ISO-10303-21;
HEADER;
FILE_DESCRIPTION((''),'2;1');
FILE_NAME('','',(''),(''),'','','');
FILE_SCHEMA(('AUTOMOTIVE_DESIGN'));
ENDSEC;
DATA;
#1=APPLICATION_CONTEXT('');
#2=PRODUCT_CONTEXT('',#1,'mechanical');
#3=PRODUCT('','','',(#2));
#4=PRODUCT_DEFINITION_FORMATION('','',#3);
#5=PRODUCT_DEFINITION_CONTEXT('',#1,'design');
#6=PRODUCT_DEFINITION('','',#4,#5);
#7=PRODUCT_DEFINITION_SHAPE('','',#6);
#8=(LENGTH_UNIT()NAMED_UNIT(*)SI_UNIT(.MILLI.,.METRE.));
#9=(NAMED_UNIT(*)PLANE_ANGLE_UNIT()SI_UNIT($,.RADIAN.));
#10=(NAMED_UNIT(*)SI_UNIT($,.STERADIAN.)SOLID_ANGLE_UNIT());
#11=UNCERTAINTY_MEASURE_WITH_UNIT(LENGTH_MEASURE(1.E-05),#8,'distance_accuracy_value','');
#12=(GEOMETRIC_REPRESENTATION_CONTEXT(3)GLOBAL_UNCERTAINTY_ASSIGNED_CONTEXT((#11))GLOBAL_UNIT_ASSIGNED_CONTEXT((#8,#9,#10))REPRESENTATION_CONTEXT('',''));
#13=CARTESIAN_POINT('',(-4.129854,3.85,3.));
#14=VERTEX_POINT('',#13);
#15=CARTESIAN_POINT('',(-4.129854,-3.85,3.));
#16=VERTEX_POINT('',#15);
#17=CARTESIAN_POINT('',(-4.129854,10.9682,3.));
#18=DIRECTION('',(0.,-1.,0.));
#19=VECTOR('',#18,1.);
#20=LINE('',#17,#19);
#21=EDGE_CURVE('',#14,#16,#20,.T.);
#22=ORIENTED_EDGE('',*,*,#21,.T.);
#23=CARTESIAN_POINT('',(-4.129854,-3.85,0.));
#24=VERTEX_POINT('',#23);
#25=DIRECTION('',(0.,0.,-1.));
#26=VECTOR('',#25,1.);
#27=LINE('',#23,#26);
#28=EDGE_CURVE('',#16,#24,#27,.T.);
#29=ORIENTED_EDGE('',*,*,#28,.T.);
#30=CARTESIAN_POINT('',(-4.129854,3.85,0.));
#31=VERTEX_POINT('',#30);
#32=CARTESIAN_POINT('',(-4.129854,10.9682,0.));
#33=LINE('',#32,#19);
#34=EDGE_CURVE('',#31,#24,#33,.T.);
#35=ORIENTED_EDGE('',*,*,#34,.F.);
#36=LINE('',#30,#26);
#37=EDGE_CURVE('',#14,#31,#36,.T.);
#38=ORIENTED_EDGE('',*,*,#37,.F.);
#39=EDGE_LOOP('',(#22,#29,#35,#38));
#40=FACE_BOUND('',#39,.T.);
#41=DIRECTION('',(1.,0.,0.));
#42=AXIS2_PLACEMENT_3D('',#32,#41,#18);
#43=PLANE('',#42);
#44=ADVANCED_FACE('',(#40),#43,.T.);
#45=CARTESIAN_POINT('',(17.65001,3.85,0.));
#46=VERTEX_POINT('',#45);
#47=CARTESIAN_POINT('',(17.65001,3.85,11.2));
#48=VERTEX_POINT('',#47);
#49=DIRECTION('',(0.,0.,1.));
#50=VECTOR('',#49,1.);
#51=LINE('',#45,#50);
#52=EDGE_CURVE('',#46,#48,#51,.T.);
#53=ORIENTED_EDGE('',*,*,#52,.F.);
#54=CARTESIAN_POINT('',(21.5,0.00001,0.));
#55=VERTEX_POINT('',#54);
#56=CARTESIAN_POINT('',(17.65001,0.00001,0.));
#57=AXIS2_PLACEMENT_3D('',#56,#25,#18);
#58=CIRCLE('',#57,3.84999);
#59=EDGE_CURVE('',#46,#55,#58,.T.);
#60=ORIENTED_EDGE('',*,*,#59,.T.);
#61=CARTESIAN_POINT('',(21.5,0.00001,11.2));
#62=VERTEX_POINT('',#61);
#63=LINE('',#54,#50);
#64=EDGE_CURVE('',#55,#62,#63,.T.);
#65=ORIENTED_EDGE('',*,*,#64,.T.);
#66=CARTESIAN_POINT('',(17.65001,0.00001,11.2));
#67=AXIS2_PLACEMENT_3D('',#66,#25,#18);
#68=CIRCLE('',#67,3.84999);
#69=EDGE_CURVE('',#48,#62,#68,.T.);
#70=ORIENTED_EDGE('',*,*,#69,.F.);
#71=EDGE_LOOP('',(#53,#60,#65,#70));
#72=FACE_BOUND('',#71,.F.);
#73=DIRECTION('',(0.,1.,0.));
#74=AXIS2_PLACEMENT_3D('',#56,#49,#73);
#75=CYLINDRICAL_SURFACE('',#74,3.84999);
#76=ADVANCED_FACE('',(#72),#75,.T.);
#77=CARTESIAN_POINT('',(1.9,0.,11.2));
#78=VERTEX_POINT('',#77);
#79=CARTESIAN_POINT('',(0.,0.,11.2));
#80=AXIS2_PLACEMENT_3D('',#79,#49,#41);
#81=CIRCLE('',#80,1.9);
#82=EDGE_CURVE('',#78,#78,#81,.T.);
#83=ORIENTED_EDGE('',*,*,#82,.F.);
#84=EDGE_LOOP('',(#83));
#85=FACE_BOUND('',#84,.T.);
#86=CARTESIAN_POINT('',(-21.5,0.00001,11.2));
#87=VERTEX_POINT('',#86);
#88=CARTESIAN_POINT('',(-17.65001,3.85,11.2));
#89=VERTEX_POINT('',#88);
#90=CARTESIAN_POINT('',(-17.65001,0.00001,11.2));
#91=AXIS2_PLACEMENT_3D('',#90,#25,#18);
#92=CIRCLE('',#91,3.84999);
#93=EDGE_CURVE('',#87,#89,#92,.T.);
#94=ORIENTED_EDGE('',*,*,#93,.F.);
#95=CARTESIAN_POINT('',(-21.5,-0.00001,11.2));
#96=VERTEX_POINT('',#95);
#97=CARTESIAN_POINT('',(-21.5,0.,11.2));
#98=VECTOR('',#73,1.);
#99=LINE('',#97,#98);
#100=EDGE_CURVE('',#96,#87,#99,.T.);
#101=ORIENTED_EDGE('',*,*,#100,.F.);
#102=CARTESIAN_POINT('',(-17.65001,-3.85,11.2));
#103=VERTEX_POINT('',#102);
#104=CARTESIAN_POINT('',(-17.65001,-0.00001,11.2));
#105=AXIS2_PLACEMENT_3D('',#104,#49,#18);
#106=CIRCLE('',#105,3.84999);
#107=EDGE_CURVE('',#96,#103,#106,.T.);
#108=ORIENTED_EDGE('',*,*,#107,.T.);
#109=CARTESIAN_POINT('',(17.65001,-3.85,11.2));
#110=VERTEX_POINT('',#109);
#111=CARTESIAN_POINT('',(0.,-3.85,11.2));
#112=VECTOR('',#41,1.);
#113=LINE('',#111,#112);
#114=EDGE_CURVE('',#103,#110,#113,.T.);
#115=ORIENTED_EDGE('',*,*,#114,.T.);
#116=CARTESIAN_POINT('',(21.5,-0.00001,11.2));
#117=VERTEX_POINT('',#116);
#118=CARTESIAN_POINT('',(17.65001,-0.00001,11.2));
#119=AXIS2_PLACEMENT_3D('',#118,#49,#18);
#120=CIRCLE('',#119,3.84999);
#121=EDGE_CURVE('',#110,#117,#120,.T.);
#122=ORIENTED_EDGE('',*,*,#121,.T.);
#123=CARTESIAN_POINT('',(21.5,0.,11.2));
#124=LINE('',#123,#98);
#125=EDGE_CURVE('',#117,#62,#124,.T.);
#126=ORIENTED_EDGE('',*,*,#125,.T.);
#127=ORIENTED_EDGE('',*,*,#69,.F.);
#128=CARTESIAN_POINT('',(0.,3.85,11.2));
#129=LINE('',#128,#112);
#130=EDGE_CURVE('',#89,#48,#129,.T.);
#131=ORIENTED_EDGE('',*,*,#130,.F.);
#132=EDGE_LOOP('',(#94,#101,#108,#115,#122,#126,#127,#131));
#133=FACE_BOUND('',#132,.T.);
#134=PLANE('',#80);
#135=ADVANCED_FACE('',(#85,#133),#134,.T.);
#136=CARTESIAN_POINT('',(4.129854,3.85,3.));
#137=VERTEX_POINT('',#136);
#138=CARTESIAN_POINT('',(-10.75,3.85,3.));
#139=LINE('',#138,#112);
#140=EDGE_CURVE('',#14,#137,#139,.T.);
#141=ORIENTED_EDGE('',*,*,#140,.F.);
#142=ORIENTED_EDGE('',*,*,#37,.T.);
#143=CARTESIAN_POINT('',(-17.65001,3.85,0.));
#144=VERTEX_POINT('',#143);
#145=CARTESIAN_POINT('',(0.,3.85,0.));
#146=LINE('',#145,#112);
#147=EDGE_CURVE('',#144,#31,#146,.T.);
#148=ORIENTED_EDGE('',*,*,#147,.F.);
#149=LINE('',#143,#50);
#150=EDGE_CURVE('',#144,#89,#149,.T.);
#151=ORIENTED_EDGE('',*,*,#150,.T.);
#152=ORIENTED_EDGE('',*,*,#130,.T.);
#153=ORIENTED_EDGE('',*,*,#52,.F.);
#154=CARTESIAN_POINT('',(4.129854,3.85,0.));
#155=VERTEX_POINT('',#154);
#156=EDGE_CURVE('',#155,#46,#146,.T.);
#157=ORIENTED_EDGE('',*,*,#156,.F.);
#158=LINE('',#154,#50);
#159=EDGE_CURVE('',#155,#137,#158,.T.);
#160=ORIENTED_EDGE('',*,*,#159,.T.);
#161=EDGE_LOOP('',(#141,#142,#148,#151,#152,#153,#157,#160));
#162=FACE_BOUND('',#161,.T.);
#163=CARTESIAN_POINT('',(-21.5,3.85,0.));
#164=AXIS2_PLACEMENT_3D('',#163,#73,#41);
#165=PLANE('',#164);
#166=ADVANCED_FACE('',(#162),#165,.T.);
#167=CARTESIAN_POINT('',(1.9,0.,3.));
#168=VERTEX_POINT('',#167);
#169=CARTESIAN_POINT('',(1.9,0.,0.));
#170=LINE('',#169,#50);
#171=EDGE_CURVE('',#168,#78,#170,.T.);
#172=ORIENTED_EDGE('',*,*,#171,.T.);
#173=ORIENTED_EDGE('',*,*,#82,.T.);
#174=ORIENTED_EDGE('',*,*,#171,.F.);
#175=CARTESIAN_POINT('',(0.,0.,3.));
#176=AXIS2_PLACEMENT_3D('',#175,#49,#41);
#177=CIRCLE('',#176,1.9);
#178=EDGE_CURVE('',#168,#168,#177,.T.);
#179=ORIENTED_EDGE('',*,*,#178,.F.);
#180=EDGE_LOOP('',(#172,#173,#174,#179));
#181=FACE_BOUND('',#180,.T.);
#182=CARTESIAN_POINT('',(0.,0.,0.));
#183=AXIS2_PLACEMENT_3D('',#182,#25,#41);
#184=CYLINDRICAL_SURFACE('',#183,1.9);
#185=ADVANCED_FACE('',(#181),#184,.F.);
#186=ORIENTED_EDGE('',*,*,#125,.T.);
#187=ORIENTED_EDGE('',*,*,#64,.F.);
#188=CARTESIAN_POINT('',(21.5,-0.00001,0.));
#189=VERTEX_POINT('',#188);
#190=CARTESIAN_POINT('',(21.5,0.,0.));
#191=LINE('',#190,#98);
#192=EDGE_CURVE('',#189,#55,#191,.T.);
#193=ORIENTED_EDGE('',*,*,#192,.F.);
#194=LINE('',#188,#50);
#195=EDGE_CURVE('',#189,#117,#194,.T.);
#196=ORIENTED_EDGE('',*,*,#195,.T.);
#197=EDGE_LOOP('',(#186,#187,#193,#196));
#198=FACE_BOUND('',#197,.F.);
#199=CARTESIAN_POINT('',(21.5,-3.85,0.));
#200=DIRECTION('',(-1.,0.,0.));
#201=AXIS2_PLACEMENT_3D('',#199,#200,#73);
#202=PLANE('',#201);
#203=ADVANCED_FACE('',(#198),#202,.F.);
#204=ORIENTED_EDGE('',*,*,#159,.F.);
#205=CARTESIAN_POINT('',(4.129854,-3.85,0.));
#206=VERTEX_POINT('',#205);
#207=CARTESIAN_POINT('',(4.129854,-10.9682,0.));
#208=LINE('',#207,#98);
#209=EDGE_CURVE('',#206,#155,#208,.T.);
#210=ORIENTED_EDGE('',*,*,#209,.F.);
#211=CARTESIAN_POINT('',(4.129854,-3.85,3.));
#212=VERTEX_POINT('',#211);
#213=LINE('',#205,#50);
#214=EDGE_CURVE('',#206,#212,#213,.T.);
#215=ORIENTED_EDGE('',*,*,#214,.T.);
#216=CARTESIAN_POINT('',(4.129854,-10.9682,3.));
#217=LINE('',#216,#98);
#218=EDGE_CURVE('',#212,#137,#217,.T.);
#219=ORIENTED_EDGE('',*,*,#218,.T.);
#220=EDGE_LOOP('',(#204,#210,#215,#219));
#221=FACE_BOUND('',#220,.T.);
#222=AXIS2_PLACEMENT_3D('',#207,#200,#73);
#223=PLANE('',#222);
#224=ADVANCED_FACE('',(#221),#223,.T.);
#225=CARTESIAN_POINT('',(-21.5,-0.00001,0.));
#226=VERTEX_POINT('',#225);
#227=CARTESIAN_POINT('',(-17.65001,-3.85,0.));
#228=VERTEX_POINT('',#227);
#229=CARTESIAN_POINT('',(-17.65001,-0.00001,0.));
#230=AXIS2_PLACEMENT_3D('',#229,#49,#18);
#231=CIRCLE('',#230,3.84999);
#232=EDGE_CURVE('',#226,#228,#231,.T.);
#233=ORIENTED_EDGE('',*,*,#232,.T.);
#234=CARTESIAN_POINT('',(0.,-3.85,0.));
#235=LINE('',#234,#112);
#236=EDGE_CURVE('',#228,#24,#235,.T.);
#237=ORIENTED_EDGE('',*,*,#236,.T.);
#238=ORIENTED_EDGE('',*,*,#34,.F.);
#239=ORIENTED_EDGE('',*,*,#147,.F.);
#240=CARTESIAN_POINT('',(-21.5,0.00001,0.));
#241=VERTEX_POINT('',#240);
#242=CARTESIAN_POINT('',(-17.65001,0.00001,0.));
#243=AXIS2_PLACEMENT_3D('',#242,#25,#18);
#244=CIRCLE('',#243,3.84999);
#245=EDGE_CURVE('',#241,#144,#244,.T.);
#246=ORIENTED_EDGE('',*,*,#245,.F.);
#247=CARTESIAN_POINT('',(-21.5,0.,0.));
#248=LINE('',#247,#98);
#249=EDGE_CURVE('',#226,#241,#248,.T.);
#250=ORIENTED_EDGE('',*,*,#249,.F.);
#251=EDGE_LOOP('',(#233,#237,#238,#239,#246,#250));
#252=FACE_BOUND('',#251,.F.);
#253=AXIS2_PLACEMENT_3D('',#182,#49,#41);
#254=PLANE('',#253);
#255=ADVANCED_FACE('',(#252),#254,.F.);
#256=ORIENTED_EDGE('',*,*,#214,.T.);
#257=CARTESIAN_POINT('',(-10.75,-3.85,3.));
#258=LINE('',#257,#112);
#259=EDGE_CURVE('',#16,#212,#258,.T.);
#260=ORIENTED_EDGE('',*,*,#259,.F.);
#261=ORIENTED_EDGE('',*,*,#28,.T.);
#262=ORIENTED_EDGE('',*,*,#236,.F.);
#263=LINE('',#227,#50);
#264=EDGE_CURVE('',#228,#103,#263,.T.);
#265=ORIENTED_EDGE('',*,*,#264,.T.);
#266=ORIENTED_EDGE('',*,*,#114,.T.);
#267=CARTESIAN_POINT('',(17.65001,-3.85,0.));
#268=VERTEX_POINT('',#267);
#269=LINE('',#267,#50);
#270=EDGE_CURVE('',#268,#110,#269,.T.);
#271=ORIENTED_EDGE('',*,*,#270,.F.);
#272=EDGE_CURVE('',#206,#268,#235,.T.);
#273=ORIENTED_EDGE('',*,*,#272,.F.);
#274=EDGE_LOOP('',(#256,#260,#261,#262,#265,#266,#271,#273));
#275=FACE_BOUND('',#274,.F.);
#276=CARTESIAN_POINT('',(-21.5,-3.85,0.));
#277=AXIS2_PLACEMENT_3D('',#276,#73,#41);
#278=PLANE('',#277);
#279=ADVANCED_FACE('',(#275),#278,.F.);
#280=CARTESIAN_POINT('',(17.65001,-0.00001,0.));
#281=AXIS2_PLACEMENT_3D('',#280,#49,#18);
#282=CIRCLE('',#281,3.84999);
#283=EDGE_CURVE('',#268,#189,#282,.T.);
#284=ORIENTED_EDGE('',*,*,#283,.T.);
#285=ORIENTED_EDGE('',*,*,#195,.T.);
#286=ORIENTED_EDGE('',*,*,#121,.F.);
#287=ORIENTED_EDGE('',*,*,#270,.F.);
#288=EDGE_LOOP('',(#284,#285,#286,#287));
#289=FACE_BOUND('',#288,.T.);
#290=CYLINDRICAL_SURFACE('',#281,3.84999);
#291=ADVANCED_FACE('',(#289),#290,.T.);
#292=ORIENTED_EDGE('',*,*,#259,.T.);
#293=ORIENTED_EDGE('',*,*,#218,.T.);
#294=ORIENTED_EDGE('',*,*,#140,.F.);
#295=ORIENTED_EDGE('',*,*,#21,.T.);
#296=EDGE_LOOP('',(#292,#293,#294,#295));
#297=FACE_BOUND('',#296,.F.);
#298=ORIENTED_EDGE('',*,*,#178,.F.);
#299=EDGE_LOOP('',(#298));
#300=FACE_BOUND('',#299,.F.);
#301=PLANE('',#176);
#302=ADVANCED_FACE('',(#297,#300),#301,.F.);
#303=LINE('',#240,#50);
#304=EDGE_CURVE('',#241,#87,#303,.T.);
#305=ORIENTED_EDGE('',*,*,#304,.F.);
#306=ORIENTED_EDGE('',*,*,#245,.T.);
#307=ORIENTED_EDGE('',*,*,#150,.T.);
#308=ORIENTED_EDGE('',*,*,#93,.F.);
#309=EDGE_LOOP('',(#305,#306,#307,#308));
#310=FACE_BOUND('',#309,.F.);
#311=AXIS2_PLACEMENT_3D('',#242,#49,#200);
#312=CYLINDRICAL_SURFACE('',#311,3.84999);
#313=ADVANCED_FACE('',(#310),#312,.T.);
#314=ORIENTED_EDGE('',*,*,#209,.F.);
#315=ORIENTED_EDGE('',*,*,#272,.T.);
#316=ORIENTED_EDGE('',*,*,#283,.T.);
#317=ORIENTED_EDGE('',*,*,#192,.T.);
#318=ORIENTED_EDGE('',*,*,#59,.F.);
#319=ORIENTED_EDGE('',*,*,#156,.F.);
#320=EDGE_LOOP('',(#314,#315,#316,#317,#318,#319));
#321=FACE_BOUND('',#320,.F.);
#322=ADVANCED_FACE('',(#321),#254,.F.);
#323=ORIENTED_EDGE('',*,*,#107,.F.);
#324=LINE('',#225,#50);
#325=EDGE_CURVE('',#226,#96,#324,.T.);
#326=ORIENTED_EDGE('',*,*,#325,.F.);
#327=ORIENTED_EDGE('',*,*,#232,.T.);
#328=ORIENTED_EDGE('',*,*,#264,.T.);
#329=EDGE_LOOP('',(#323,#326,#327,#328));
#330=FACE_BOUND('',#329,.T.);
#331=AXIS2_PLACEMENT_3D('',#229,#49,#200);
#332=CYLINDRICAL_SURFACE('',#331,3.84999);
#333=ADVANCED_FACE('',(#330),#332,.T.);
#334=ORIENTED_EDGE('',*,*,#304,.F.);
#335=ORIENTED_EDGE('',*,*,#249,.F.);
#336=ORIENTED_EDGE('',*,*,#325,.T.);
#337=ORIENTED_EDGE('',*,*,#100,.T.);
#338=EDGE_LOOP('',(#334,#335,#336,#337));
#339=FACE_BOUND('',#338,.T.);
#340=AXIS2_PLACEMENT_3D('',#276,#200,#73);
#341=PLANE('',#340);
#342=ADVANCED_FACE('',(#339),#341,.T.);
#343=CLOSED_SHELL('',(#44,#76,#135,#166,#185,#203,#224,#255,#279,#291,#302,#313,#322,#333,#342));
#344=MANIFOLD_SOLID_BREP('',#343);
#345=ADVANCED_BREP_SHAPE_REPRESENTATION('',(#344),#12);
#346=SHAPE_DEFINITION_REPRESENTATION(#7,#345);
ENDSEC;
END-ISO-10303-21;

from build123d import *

# Parameters (mm, degrees)
F1_W     = 43
F1_H     = 7.7
F1_R     = 1.9
F3_DEPTH = 11.2
F2_R     = 3.4
F2_R_2   = 1.9
F4_DEPTH = 3
F5_R     = 3.84999
F6_W     = 8.2597071305
F6_H     = 7.7
F6_H_2   = 7.1181999311
F7_DEPTH = 3


# Not quite as in the source:
# - a fillet or chamfer is up to 0.001 mm smaller than in the source, because OpenCascade refuses the exact size


with BuildPart() as f3:
    # F1 (on face) → F3 (new body)
    with BuildSketch(Plane.XY):
        Rectangle(F1_W, F1_H)
        Circle(F1_R, mode=Mode.SUBTRACT)
    extrude(amount=F3_DEPTH)

    # F2 (on face) → F4 (cut)
    with BuildSketch(Plane.XY):
        Circle(F2_R)
        Circle(F2_R_2, mode=Mode.SUBTRACT)
    extrude(amount=F4_DEPTH, mode=Mode.SUBTRACT)

    # F5 (radius 3.85 in the source; OpenCascade refuses exactly that, so slightly less here)
    f5_edges = [f3.edges().sort_by_distance(p)[0] for p in [
        (-21.5, -3.85, 5.6),
        (-21.5, 3.85, 5.6),
        (21.5, -3.85, 5.6),
        (21.5, 3.85, 5.6),
    ]]
    fillet(f5_edges, radius=F5_R)

    # F6 (on face) → F7 (cut)
    with BuildSketch(Plane.XY):
        Rectangle(F6_W, F6_H)
        with Locations((0, -7.4090999655)):
            Rectangle(F6_W, F6_H_2)
        with Locations((0, 7.4090999655)):
            Rectangle(F6_W, F6_H_2)
    extrude(amount=F7_DEPTH, mode=Mode.SUBTRACT)


solid = f3.part
